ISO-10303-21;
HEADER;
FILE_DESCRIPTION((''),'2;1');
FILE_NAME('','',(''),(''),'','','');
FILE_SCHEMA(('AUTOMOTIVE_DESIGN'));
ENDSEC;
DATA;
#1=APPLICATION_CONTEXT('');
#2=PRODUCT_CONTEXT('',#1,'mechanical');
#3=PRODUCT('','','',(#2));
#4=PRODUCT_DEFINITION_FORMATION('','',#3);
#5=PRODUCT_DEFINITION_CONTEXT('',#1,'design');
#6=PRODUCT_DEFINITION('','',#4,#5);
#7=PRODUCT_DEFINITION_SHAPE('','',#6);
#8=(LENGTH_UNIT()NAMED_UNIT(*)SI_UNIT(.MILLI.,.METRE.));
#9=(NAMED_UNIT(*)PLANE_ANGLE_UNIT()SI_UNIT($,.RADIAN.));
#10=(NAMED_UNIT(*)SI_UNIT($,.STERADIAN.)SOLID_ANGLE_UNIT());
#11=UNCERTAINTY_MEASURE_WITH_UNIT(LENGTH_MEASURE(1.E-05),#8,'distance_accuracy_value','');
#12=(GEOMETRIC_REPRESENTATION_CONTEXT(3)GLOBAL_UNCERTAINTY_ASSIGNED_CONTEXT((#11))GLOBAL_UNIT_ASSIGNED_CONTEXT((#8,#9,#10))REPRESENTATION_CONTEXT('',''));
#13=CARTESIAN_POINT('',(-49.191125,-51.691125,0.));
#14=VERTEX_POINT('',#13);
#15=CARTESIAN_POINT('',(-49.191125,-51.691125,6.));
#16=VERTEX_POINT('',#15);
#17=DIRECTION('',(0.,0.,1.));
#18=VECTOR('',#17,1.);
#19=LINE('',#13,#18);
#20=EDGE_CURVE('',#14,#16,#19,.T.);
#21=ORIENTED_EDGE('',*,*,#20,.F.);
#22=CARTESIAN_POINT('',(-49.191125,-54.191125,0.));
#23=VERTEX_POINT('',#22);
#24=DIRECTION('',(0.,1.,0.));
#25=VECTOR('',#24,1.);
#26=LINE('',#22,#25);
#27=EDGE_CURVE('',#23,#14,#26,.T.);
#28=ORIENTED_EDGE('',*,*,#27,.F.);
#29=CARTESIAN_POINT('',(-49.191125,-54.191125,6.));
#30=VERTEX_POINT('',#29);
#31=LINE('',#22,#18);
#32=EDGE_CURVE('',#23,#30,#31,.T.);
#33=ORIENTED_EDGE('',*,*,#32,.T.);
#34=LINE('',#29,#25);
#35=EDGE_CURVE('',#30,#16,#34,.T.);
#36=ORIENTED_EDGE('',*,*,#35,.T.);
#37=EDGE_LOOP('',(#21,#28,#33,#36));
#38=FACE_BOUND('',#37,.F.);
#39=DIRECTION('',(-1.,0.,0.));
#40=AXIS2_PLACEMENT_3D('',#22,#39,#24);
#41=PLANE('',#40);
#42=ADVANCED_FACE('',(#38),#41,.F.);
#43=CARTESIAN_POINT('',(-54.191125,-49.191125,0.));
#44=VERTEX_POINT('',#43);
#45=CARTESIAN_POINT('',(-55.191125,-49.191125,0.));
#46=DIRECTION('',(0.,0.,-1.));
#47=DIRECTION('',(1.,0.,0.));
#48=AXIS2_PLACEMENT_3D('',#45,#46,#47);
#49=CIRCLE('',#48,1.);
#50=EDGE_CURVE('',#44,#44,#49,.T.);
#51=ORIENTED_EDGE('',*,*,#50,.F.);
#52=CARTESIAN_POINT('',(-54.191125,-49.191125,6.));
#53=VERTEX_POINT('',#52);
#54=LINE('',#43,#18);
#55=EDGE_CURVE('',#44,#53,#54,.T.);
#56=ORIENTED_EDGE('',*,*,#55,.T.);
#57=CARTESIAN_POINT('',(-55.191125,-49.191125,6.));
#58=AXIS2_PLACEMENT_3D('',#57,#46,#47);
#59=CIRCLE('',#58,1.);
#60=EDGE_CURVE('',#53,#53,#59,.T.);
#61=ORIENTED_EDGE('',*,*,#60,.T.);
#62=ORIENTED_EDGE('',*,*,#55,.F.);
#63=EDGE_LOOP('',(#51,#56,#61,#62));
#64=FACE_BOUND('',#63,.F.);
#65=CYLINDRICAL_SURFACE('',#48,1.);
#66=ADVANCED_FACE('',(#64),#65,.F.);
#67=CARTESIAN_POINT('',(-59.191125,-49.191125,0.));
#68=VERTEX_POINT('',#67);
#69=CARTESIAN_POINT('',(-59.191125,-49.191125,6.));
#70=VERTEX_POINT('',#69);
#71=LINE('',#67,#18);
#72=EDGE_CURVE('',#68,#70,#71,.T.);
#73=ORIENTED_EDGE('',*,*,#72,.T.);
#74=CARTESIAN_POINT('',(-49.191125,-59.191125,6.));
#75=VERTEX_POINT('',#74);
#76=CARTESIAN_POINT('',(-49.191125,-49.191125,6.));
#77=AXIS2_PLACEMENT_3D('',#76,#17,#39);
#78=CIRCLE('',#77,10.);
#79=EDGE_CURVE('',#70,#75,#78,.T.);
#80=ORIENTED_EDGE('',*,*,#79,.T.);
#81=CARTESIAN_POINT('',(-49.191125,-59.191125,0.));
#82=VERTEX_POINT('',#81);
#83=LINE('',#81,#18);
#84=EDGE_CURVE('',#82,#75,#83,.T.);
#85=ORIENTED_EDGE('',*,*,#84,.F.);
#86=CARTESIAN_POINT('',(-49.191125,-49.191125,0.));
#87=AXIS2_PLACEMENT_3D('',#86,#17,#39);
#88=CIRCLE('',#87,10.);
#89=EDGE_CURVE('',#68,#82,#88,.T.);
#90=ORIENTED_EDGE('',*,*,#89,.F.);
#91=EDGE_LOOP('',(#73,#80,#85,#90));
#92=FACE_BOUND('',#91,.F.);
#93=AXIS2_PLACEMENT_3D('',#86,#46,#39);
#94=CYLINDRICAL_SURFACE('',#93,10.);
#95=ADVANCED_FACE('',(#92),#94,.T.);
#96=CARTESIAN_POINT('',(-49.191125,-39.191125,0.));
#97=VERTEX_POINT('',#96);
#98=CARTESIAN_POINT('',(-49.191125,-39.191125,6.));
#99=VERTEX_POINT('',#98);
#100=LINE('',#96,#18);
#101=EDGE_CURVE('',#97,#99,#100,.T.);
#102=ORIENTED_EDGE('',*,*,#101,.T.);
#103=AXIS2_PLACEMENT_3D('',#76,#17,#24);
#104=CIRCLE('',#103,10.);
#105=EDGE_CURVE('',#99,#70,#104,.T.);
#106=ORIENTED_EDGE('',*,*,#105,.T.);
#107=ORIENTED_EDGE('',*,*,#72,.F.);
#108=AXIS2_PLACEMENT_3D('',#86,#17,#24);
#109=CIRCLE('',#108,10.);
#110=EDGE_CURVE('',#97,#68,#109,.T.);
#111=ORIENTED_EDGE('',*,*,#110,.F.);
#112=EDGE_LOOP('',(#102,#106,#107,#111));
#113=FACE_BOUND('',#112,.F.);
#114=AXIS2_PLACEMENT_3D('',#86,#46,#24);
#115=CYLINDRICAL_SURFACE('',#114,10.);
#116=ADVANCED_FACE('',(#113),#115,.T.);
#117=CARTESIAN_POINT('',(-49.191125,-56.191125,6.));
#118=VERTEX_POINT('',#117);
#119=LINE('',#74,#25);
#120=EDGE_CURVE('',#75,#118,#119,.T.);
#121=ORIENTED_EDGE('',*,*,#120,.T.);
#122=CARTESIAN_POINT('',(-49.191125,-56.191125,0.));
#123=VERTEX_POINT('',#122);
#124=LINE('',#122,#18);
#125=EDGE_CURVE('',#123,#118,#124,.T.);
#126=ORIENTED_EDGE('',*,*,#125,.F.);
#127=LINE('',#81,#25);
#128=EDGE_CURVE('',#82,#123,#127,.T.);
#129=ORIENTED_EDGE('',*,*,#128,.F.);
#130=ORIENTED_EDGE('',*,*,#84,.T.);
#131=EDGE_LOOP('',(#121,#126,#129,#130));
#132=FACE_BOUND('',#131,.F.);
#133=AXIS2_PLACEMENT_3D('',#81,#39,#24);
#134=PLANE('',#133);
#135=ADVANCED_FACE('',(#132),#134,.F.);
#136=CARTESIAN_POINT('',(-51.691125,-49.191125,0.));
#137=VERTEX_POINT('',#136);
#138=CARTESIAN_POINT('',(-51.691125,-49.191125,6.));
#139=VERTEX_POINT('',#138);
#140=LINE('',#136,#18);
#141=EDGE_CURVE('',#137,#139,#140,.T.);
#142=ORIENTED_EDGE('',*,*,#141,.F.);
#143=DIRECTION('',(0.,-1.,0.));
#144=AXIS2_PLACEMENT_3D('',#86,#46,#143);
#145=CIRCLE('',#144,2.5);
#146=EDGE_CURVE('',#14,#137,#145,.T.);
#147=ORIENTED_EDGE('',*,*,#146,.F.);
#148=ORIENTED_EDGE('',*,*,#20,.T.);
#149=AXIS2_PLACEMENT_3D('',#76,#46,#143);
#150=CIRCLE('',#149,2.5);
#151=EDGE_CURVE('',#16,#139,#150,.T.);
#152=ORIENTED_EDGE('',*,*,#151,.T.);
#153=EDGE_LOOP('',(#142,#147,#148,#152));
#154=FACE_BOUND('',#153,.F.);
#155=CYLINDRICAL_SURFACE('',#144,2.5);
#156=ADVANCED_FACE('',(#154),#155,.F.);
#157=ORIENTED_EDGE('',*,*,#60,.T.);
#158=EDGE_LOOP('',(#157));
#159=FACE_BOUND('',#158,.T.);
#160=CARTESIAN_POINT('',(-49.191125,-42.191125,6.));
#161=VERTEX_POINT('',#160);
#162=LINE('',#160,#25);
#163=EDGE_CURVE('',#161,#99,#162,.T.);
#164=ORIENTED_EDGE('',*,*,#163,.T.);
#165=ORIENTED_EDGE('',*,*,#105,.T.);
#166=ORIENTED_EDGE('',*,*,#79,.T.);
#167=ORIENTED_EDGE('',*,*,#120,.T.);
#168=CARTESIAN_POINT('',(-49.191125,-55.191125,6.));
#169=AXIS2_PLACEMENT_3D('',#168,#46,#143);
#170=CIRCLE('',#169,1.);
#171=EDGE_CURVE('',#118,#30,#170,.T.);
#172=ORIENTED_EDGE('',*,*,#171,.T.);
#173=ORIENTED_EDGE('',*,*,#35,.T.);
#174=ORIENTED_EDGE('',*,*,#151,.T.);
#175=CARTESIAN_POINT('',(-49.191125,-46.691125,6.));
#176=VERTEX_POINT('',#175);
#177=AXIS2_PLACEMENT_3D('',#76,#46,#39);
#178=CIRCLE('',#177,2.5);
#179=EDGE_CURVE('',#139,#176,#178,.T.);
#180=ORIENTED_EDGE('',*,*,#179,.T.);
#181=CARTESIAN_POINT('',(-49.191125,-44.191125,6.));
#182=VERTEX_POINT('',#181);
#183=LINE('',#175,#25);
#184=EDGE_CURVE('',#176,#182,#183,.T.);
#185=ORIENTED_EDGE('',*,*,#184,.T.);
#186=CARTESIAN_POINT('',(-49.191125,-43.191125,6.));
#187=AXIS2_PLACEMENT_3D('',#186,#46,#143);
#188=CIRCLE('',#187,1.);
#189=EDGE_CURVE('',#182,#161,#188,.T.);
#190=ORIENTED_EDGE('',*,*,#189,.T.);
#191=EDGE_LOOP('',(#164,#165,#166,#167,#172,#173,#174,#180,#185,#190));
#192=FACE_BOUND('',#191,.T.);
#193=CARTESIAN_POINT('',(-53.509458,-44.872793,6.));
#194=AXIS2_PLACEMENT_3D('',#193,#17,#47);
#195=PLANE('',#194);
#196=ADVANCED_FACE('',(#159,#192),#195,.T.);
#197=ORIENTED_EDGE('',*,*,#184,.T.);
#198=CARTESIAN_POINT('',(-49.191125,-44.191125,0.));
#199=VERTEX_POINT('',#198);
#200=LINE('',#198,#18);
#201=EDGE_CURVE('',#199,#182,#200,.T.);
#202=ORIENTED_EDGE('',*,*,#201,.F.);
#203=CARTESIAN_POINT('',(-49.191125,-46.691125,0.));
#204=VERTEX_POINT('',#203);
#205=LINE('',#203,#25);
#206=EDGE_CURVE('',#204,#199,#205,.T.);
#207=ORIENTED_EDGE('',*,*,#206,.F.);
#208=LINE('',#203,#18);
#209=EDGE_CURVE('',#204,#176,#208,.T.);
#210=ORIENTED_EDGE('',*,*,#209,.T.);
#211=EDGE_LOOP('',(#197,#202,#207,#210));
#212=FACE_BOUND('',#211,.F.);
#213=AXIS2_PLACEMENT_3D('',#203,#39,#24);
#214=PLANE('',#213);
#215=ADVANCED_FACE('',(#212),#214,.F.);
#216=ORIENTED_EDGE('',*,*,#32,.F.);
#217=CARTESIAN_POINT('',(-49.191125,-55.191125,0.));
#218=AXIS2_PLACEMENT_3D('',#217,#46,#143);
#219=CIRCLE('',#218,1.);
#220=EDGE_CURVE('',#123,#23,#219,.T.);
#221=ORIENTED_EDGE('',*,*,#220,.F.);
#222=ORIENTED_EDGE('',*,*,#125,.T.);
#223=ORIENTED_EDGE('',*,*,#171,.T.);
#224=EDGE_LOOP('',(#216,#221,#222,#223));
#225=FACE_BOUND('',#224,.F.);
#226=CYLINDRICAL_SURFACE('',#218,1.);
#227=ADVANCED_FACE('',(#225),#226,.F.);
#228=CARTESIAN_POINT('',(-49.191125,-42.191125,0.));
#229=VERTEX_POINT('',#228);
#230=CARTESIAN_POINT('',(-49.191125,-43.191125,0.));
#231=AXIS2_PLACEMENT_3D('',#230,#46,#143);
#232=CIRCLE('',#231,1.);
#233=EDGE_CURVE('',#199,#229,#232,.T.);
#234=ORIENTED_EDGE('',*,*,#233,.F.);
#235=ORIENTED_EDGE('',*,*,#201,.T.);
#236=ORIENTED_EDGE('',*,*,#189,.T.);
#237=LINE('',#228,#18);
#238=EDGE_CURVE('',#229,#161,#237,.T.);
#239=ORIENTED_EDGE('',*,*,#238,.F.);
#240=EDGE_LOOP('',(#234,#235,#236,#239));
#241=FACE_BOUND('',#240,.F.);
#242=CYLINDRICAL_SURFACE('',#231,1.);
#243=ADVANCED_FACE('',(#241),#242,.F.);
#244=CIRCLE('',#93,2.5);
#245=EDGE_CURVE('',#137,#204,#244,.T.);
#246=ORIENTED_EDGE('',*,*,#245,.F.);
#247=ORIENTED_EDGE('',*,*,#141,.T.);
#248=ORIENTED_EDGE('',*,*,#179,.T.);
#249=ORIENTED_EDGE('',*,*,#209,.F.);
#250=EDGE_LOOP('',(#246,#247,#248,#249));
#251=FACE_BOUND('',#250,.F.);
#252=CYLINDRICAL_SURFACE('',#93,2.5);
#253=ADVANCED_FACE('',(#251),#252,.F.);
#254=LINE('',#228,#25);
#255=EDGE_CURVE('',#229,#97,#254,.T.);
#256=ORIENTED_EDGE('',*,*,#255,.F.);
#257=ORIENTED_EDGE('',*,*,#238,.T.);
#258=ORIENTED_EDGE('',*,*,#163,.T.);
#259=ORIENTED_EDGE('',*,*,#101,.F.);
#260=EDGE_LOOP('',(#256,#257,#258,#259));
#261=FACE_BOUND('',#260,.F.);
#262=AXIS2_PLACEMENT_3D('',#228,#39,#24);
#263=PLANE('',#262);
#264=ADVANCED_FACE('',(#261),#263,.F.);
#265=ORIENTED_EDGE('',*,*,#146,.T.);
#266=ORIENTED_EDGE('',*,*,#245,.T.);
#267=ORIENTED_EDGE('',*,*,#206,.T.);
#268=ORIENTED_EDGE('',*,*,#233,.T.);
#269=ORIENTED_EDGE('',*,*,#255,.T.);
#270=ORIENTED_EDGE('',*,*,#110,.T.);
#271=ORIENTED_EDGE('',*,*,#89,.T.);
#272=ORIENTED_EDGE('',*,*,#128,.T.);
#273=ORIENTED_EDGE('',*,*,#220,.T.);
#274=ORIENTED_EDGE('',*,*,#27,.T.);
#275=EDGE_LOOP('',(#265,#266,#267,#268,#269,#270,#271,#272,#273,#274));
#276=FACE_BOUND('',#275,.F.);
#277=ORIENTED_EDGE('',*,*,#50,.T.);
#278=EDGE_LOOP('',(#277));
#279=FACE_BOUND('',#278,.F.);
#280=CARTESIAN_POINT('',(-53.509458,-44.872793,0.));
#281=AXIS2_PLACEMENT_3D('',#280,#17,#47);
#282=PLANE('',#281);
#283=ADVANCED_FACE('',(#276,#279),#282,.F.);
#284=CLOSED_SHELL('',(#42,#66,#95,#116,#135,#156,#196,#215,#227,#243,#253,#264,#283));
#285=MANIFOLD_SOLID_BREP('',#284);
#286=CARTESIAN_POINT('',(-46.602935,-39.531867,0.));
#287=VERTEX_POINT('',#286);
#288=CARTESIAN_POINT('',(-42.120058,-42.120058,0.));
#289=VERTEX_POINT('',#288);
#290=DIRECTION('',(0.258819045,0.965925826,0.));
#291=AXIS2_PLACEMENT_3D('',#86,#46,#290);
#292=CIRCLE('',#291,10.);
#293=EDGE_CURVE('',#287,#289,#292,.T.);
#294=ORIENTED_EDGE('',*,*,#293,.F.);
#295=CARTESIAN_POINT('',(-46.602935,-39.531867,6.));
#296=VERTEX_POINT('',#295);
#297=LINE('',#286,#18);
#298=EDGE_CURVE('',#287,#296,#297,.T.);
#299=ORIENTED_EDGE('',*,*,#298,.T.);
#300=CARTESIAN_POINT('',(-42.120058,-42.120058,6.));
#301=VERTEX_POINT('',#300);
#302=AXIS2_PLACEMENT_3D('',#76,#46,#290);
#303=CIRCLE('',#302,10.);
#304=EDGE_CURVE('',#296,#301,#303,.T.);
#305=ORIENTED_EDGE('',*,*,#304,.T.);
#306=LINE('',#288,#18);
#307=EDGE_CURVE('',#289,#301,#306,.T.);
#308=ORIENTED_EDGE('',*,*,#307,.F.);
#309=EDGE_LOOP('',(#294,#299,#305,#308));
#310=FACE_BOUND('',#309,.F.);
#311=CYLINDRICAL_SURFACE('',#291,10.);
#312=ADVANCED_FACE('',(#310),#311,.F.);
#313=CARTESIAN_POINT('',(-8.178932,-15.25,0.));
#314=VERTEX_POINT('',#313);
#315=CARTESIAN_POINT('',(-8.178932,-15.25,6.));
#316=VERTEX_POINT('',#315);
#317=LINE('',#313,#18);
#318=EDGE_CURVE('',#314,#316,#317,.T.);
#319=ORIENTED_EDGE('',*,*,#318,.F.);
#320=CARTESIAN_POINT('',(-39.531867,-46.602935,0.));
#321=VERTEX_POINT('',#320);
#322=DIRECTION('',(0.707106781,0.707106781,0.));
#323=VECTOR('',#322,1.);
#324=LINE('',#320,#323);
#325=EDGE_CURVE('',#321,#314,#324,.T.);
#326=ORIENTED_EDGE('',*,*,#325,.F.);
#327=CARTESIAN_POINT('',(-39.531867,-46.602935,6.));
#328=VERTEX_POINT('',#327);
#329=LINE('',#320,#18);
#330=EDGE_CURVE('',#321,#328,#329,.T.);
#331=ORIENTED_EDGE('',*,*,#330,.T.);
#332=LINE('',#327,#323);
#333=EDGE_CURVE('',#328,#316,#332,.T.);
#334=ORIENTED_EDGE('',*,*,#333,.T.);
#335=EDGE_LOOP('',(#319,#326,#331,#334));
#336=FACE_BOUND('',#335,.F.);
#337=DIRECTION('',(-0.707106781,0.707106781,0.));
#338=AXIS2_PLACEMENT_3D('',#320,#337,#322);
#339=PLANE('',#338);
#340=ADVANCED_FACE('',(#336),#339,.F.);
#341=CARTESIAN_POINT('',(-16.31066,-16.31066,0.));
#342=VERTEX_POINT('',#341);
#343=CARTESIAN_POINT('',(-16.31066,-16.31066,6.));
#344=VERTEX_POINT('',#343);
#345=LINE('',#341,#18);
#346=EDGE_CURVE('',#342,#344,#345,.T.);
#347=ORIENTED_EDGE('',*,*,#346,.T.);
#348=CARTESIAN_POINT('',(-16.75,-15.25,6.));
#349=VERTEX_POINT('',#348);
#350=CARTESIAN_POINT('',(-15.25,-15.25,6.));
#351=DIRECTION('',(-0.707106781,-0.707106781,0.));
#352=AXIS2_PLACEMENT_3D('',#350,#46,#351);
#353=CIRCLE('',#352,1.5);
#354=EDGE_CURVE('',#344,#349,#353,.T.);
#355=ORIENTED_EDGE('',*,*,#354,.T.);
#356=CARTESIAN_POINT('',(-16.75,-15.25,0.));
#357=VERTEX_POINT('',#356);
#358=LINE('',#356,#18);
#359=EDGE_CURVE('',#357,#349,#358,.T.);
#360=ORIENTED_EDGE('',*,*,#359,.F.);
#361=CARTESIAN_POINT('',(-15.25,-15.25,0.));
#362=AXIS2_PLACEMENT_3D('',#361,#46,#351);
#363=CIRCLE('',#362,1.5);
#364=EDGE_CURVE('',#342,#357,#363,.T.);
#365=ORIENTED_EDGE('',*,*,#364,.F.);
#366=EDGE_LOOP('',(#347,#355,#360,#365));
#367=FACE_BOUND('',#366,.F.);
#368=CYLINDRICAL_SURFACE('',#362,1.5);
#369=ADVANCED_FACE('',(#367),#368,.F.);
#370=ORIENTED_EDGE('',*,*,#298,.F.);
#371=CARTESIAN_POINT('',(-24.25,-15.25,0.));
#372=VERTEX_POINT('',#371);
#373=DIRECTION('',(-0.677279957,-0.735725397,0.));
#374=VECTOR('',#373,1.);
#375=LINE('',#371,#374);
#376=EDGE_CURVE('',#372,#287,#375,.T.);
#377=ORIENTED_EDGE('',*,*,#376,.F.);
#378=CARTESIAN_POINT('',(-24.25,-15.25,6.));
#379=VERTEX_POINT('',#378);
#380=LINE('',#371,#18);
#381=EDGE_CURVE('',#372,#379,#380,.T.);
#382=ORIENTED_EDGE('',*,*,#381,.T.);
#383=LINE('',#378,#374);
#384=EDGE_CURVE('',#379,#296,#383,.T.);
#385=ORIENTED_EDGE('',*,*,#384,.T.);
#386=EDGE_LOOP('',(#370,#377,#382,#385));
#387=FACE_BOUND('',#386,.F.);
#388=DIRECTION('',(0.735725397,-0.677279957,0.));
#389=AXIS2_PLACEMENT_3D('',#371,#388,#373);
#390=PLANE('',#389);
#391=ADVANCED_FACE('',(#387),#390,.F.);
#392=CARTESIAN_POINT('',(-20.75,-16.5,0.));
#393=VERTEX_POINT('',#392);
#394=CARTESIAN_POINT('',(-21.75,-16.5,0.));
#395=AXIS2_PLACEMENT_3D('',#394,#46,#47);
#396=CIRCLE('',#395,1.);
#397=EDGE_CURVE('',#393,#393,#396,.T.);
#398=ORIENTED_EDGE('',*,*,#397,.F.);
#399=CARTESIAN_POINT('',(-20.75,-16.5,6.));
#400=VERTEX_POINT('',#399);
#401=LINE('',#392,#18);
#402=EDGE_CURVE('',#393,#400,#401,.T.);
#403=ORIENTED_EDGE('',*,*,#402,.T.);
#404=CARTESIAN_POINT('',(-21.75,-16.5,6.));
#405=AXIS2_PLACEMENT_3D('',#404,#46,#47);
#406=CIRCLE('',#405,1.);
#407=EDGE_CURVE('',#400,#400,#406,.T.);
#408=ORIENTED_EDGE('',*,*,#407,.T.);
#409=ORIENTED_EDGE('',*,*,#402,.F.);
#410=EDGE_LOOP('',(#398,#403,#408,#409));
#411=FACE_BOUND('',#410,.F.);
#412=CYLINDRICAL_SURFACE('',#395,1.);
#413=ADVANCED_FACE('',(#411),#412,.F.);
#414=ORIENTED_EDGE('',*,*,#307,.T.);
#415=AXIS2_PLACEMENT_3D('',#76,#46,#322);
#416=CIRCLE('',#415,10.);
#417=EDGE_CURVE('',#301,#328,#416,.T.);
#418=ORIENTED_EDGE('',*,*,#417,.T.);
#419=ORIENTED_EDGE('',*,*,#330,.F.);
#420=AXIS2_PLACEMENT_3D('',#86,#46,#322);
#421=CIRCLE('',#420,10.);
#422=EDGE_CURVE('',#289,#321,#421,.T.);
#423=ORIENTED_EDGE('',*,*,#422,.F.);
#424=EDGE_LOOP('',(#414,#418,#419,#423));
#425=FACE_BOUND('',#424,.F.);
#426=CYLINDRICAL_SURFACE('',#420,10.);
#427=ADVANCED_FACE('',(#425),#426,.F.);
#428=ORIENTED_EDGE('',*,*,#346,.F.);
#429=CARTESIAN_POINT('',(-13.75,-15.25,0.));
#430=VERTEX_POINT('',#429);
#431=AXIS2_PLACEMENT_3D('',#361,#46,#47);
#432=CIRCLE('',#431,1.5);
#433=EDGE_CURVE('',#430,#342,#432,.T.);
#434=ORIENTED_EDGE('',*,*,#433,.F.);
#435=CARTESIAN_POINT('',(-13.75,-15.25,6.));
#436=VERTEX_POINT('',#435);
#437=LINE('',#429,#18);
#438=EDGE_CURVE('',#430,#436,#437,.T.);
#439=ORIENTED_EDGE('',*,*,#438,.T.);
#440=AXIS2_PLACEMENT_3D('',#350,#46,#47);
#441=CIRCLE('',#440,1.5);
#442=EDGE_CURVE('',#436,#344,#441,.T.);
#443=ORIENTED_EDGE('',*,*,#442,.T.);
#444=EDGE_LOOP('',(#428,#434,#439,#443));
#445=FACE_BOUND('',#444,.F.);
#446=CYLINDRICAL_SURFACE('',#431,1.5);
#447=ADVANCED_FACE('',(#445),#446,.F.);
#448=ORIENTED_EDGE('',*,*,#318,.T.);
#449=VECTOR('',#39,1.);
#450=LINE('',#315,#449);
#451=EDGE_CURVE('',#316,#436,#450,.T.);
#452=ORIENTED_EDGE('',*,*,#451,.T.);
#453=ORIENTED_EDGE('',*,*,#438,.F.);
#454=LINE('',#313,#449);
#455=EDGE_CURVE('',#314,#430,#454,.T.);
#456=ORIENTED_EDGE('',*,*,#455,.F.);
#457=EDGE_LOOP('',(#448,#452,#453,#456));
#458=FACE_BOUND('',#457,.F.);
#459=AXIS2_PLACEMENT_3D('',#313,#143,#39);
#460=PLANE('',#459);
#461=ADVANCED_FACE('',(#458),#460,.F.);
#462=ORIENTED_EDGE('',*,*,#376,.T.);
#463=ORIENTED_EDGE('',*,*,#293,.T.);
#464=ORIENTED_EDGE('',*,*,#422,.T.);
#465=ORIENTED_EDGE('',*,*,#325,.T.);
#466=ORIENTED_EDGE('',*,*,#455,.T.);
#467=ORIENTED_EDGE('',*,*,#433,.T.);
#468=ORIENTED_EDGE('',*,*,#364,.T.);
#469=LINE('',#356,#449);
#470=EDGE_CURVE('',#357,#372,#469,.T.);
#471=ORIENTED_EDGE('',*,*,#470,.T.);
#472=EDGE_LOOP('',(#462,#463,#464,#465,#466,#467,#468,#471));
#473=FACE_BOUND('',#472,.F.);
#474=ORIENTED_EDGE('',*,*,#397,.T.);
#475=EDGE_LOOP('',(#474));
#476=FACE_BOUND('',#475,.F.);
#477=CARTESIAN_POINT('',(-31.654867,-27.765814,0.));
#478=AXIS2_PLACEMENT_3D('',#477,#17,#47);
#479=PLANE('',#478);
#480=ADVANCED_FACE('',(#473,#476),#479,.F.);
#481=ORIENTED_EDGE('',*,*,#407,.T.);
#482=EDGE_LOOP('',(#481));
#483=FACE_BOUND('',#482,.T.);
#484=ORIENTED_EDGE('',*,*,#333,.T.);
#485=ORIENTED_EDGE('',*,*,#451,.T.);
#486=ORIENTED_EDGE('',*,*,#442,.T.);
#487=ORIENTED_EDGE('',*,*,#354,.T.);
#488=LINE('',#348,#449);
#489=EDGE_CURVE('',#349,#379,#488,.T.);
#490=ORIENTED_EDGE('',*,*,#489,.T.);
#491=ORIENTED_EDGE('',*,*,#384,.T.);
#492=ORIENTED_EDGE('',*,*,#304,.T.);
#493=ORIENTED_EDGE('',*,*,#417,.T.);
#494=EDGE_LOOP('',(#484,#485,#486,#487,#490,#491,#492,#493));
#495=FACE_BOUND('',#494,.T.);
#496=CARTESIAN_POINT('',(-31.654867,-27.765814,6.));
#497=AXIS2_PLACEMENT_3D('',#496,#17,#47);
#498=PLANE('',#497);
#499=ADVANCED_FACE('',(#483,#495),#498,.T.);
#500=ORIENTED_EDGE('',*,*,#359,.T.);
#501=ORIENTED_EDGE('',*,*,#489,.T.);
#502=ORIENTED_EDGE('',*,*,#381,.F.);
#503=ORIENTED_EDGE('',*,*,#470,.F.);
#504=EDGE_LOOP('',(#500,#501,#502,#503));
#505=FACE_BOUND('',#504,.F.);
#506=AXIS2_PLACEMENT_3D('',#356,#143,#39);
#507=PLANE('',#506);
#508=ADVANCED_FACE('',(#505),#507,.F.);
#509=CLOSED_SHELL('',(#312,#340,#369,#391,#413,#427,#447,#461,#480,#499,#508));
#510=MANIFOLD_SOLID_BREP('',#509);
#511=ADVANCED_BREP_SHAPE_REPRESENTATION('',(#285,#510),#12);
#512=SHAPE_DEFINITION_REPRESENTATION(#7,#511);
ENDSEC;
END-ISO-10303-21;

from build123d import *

# Parameters (mm, degrees)
F1_DEPTH = 6


# Not quite as in the source:
# - a feature names something its author has since deleted; it is built from what else it names


with BuildPart() as f1:
    # F0 (on Top) → F1 (new body)
    with BuildSketch(Plane.XY):
        with BuildLine():
            ThreePointArc((-16.3106601718, -16.3106601718), (-16.6358192988, -15.8240251485), (-16.75, -15.25))
            Line((-16.75, -15.25), (-24.25, -15.25))
            Line((-24.25, -15.25), (-46.6029350459, -39.5318672341))
            ThreePointArc((-46.6029350459, -39.5318672341), (-44.191125497, -40.5308714591), (-42.1200576851, -42.1200576851))
            Line((-42.1200576851, -42.1200576851), (-16.3106601718, -16.3106601718))
        make_face()
        with BuildLine():
            ThreePointArc((-22.75, -16.5), (-21.75, -15.5), (-20.75, -16.5))
            ThreePointArc((-20.75, -16.5), (-21.75, -17.5), (-22.75, -16.5))
        make_face(mode=Mode.SUBTRACT)
        with BuildLine():
            Line((-8.1789321881, -15.25), (-13.75, -15.25))
            ThreePointArc((-13.75, -15.25), (-14.6759748515, -16.6358192988), (-16.3106601718, -16.3106601718))
            Line((-16.3106601718, -16.3106601718), (-42.1200576851, -42.1200576851))
            ThreePointArc((-42.1200576851, -42.1200576851), (-40.5308714591, -44.191125497), (-39.5318672341, -46.6029350459))
            Line((-39.5318672341, -46.6029350459), (-8.1789321881, -15.25))
        make_face()
    extrude(amount=F1_DEPTH)


with BuildPart() as f1b:
    # F0 (on Top) → F1, piece 2 (new body)
    with BuildSketch(Plane.XY):
        with BuildLine():
            Line((-49.191125497, -42.191125497), (-49.191125497, -39.191125497))
            ThreePointArc((-49.191125497, -39.191125497), (-56.2621933088, -42.1200576851), (-59.191125497, -49.191125497))
            Line((-59.191125497, -49.191125497), (-56.191125497, -49.191125497))
            ThreePointArc((-56.191125497, -49.191125497), (-55.191125497, -48.191125497), (-54.191125497, -49.191125497))
            Line((-54.191125497, -49.191125497), (-51.691125497, -49.191125497))
            ThreePointArc((-51.691125497, -49.191125497), (-50.9588924499, -47.423358544), (-49.191125497, -46.691125497))
            Line((-49.191125497, -46.691125497), (-49.191125497, -44.191125497))
            ThreePointArc((-49.191125497, -44.191125497), (-50.191125497, -43.191125497), (-49.191125497, -42.191125497))
        make_face()
        with BuildLine():
            Line((-56.191125497, -49.191125497), (-59.191125497, -49.191125497))
            ThreePointArc((-59.191125497, -49.191125497), (-56.2621933088, -56.2621933088), (-49.191125497, -59.191125497))
            Line((-49.191125497, -59.191125497), (-49.191125497, -56.191125497))
            ThreePointArc((-49.191125497, -56.191125497), (-50.191125497, -55.191125497), (-49.191125497, -54.191125497))
            Line((-49.191125497, -54.191125497), (-49.191125497, -51.691125497))
            ThreePointArc((-49.191125497, -51.691125497), (-50.9588924499, -50.9588924499), (-51.691125497, -49.191125497))
            Line((-51.691125497, -49.191125497), (-54.191125497, -49.191125497))
            ThreePointArc((-54.191125497, -49.191125497), (-55.191125497, -50.191125497), (-56.191125497, -49.191125497))
        make_face()
    extrude(amount=F1_DEPTH)


solid = Compound([f1.part, f1b.part])
